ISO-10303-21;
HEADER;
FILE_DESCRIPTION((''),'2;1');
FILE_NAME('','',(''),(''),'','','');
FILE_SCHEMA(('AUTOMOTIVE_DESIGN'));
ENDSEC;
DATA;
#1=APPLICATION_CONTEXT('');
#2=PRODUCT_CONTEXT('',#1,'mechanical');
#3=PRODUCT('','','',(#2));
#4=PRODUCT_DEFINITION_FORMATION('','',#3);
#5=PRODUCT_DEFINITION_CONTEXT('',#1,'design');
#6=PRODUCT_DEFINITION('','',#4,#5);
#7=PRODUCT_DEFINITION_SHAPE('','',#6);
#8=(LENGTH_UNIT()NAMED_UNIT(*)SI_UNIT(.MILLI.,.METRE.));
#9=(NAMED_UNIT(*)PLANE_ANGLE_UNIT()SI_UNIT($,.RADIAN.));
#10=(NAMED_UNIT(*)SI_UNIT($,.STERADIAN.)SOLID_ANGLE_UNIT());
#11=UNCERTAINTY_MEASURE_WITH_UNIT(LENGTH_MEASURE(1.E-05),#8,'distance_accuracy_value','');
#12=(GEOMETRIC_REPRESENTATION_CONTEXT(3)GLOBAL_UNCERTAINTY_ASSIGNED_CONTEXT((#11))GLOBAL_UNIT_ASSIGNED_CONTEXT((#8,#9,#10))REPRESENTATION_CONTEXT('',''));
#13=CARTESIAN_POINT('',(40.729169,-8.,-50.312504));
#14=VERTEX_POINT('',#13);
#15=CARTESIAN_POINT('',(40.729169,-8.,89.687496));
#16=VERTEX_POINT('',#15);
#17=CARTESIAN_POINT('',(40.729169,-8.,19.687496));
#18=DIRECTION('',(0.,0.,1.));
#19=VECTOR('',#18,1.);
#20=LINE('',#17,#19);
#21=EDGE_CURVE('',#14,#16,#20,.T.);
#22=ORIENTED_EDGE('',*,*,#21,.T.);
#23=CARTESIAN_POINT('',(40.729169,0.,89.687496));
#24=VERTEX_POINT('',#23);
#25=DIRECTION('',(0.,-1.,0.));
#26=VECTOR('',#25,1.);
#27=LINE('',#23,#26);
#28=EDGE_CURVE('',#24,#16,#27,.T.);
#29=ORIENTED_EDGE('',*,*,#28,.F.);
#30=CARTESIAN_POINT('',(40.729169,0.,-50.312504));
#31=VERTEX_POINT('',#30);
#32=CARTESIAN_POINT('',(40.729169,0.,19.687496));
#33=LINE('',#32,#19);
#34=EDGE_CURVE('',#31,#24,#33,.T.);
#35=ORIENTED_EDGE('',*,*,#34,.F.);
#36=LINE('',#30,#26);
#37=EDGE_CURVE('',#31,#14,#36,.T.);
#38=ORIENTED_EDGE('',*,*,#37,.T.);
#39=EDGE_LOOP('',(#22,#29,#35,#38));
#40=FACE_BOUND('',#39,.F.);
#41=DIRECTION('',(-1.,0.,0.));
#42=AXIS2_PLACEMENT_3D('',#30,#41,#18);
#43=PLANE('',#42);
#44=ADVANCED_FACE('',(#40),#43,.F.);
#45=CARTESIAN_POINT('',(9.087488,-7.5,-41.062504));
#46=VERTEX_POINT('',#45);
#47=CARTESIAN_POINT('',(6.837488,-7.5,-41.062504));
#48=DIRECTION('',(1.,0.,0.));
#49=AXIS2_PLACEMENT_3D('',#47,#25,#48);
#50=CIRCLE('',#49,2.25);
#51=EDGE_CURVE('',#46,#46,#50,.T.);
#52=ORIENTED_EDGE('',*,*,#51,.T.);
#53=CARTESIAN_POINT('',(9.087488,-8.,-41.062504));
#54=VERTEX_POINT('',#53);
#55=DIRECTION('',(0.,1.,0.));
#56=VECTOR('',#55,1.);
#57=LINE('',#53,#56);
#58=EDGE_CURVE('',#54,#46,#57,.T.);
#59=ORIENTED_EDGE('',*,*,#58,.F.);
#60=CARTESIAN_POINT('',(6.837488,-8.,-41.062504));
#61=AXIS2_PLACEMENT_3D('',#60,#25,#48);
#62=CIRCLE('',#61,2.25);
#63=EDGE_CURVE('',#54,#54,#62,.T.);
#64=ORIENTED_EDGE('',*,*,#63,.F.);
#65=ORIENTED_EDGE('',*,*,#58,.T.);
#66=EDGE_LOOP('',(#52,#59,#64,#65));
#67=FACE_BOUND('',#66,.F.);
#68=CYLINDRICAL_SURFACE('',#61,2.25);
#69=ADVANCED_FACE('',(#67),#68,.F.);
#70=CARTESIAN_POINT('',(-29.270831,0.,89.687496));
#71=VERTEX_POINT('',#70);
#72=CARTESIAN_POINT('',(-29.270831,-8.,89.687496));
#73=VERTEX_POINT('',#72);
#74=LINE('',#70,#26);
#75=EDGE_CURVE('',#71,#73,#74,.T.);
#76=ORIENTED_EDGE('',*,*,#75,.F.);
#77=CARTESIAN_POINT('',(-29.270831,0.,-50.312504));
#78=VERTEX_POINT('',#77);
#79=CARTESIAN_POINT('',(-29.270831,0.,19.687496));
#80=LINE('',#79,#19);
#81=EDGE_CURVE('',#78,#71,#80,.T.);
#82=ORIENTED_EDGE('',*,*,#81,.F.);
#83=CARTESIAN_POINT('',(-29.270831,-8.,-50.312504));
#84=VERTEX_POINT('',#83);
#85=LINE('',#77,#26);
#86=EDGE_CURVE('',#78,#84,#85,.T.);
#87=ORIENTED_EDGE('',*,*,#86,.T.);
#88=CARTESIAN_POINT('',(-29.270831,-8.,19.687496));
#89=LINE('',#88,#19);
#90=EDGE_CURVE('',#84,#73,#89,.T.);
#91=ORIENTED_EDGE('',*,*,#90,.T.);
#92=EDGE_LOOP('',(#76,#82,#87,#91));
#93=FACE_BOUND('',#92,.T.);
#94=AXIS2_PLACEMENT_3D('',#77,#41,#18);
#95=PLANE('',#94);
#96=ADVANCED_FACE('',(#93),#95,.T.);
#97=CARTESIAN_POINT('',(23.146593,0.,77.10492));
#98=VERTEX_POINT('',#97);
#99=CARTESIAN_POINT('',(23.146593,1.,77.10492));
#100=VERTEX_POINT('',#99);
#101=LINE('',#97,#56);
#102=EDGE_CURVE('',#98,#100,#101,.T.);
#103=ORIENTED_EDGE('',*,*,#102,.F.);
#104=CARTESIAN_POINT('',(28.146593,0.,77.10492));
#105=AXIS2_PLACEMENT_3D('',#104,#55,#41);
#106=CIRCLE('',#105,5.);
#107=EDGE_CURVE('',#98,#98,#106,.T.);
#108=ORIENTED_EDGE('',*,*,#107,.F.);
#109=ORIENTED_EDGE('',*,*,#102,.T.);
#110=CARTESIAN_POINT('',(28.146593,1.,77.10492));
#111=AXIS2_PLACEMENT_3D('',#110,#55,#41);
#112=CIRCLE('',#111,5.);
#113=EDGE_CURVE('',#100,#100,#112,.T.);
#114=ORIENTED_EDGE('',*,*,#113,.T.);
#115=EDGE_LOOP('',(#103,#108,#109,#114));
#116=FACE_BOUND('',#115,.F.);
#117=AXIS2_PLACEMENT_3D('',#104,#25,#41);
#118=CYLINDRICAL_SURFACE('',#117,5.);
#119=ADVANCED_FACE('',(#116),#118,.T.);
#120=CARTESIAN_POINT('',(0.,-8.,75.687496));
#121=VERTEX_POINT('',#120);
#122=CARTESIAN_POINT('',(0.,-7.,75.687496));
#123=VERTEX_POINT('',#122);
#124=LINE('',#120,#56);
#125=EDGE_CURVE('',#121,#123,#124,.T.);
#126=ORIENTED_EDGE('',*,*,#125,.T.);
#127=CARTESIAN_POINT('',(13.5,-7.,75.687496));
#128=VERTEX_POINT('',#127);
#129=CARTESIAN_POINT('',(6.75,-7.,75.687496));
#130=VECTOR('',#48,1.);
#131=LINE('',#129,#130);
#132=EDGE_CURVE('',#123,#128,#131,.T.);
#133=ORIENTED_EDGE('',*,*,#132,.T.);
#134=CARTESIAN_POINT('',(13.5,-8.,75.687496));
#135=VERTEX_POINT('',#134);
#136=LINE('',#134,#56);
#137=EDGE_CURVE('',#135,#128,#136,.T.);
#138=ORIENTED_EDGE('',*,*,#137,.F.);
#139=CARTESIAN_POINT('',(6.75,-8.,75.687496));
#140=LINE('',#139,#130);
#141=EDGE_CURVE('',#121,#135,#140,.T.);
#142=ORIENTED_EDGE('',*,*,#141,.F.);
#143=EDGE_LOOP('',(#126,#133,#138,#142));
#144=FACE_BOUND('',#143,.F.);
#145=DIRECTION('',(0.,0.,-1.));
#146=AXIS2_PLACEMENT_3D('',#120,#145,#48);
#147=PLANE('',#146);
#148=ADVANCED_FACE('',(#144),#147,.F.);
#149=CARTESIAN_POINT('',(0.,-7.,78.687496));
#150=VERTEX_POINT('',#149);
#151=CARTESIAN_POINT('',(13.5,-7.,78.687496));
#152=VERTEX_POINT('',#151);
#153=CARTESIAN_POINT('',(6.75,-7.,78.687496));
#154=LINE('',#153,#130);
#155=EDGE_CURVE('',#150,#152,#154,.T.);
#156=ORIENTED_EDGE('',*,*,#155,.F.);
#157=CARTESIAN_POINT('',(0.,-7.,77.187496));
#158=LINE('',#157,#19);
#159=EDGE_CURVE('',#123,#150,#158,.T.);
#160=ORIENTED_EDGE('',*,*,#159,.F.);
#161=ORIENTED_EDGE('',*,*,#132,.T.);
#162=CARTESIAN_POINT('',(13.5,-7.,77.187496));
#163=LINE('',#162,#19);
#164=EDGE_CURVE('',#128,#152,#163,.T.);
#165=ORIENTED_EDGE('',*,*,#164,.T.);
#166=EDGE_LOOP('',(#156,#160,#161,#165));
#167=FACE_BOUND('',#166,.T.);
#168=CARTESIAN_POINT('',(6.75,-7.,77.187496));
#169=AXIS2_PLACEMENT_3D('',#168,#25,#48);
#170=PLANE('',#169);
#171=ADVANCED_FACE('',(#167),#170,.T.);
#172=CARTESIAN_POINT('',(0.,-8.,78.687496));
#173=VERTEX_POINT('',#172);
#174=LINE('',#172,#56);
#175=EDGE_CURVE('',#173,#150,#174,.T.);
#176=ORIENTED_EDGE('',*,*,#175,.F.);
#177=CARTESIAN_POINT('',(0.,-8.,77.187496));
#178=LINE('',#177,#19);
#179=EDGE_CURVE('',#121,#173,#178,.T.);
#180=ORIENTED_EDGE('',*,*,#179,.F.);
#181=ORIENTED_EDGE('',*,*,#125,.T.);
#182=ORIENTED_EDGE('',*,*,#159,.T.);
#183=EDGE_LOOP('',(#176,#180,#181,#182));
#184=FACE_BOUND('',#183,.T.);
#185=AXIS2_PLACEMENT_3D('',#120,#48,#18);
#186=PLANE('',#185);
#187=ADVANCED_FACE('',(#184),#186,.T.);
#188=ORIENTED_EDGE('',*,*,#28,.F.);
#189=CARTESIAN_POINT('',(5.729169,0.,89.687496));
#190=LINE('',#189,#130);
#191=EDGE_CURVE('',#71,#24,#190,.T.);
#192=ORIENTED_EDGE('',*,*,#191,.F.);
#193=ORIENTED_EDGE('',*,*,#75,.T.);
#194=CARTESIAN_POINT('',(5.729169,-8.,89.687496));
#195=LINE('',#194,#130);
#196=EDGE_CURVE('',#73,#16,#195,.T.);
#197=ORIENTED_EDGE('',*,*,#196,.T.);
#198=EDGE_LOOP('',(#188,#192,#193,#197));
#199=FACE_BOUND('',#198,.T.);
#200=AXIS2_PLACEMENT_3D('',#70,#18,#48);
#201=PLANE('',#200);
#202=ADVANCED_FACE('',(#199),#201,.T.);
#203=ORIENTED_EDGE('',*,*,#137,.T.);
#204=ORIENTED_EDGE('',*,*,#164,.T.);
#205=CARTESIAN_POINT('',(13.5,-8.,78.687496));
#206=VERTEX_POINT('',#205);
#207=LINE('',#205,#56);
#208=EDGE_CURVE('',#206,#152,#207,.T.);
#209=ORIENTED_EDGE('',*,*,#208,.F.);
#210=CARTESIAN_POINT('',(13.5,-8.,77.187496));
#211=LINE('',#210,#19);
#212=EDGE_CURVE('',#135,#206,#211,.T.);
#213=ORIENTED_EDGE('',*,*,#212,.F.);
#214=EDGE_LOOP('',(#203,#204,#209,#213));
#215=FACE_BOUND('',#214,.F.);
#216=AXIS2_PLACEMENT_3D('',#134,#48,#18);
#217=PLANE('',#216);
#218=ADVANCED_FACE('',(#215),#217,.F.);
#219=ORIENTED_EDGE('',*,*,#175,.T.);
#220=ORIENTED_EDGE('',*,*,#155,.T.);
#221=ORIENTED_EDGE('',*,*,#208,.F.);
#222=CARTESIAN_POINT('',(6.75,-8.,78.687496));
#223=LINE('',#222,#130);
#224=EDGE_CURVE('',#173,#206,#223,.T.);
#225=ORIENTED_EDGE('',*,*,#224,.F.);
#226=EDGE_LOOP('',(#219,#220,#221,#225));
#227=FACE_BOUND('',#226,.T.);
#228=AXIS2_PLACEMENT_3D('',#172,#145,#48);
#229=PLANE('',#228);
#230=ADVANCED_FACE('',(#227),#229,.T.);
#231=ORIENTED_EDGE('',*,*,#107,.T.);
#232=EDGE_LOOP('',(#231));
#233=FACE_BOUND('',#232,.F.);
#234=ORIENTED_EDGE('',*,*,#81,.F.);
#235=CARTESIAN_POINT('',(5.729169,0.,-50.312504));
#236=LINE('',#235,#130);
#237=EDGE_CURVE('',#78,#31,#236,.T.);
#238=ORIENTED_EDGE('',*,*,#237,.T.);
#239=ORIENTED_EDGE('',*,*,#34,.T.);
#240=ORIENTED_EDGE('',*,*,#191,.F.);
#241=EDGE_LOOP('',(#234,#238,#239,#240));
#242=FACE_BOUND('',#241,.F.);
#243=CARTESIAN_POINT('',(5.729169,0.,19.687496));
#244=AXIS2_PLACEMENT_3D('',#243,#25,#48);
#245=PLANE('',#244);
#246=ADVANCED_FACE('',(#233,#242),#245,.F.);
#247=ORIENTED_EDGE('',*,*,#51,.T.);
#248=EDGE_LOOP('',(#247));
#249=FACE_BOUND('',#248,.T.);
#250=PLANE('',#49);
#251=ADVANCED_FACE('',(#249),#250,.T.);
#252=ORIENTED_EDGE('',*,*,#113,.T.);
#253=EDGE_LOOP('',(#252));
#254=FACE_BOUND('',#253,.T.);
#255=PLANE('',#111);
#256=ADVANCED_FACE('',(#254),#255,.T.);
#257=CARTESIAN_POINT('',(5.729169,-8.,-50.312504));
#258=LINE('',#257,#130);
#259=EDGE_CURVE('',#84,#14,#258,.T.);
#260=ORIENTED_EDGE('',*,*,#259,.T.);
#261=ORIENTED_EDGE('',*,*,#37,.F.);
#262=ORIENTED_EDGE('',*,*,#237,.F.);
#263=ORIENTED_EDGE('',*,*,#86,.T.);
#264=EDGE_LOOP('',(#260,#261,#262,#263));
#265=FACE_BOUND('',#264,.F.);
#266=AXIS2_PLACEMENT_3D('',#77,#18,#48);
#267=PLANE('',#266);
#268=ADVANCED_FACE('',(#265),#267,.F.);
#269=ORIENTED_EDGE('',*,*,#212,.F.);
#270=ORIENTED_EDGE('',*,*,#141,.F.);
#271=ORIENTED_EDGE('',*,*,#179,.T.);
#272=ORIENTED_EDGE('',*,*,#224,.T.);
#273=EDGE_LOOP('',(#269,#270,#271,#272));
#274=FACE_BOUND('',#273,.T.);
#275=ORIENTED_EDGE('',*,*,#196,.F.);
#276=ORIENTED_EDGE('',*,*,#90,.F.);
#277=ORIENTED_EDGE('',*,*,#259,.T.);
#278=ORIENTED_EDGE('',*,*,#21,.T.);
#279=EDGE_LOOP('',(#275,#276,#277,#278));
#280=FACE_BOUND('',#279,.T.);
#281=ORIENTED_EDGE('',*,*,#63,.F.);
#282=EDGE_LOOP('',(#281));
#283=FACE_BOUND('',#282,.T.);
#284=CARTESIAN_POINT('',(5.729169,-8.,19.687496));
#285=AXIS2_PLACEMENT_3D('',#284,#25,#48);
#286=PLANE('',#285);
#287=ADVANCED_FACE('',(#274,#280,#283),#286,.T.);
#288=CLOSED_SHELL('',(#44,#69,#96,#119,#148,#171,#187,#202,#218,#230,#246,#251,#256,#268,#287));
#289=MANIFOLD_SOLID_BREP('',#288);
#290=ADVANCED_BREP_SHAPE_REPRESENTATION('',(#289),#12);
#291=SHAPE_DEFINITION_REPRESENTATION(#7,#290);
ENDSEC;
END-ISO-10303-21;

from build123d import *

# Parameters (mm, degrees)
F0_W     = 70
F0_H     = 140
F1_DEPTH = 8
F2_W     = 13.5
F2_H     = 3
F3_DEPTH = 1
F4_R     = 2.25
F5_DEPTH = 0.5
F6_R     = 5
F7_DEPTH = 1


# Not quite as in the source:
# - a feature of the source that left no trace in its solid (it failed there, or was rolled back) is left out


with BuildPart() as f1:
    # F0 (on Front) → F1 (new body)
    with BuildSketch(Plane.XZ):
        with Locations((5.7291688025, 19.6874958277)):
            Rectangle(F0_W, F0_H)
    extrude(amount=F1_DEPTH)

    # F2 (on face) → F3 (cut)
    with BuildSketch(Plane.XZ.offset(8)):
        with Locations((6.75, 77.1874958277)):
            Rectangle(F2_W, F2_H)
    extrude(amount=-F3_DEPTH, mode=Mode.SUBTRACT)

    # F4 (on face) → F5 (cut)
    with BuildSketch(Plane.XZ.offset(8)):
        with Locations((6.8374876864, -41.0625041723)):
            Circle(F4_R)
    extrude(amount=-F5_DEPTH, mode=Mode.SUBTRACT)

    # F6 (on face) → F7 (join)
    with BuildSketch(Plane(origin=(0, 0, 0), x_dir=(-1, 0, 0), z_dir=(0, 1, 0))):
        with Locations((-28.1465931075, 77.1049201327)):
            Circle(F6_R)
    extrude(amount=F7_DEPTH)


solid = f1.part
